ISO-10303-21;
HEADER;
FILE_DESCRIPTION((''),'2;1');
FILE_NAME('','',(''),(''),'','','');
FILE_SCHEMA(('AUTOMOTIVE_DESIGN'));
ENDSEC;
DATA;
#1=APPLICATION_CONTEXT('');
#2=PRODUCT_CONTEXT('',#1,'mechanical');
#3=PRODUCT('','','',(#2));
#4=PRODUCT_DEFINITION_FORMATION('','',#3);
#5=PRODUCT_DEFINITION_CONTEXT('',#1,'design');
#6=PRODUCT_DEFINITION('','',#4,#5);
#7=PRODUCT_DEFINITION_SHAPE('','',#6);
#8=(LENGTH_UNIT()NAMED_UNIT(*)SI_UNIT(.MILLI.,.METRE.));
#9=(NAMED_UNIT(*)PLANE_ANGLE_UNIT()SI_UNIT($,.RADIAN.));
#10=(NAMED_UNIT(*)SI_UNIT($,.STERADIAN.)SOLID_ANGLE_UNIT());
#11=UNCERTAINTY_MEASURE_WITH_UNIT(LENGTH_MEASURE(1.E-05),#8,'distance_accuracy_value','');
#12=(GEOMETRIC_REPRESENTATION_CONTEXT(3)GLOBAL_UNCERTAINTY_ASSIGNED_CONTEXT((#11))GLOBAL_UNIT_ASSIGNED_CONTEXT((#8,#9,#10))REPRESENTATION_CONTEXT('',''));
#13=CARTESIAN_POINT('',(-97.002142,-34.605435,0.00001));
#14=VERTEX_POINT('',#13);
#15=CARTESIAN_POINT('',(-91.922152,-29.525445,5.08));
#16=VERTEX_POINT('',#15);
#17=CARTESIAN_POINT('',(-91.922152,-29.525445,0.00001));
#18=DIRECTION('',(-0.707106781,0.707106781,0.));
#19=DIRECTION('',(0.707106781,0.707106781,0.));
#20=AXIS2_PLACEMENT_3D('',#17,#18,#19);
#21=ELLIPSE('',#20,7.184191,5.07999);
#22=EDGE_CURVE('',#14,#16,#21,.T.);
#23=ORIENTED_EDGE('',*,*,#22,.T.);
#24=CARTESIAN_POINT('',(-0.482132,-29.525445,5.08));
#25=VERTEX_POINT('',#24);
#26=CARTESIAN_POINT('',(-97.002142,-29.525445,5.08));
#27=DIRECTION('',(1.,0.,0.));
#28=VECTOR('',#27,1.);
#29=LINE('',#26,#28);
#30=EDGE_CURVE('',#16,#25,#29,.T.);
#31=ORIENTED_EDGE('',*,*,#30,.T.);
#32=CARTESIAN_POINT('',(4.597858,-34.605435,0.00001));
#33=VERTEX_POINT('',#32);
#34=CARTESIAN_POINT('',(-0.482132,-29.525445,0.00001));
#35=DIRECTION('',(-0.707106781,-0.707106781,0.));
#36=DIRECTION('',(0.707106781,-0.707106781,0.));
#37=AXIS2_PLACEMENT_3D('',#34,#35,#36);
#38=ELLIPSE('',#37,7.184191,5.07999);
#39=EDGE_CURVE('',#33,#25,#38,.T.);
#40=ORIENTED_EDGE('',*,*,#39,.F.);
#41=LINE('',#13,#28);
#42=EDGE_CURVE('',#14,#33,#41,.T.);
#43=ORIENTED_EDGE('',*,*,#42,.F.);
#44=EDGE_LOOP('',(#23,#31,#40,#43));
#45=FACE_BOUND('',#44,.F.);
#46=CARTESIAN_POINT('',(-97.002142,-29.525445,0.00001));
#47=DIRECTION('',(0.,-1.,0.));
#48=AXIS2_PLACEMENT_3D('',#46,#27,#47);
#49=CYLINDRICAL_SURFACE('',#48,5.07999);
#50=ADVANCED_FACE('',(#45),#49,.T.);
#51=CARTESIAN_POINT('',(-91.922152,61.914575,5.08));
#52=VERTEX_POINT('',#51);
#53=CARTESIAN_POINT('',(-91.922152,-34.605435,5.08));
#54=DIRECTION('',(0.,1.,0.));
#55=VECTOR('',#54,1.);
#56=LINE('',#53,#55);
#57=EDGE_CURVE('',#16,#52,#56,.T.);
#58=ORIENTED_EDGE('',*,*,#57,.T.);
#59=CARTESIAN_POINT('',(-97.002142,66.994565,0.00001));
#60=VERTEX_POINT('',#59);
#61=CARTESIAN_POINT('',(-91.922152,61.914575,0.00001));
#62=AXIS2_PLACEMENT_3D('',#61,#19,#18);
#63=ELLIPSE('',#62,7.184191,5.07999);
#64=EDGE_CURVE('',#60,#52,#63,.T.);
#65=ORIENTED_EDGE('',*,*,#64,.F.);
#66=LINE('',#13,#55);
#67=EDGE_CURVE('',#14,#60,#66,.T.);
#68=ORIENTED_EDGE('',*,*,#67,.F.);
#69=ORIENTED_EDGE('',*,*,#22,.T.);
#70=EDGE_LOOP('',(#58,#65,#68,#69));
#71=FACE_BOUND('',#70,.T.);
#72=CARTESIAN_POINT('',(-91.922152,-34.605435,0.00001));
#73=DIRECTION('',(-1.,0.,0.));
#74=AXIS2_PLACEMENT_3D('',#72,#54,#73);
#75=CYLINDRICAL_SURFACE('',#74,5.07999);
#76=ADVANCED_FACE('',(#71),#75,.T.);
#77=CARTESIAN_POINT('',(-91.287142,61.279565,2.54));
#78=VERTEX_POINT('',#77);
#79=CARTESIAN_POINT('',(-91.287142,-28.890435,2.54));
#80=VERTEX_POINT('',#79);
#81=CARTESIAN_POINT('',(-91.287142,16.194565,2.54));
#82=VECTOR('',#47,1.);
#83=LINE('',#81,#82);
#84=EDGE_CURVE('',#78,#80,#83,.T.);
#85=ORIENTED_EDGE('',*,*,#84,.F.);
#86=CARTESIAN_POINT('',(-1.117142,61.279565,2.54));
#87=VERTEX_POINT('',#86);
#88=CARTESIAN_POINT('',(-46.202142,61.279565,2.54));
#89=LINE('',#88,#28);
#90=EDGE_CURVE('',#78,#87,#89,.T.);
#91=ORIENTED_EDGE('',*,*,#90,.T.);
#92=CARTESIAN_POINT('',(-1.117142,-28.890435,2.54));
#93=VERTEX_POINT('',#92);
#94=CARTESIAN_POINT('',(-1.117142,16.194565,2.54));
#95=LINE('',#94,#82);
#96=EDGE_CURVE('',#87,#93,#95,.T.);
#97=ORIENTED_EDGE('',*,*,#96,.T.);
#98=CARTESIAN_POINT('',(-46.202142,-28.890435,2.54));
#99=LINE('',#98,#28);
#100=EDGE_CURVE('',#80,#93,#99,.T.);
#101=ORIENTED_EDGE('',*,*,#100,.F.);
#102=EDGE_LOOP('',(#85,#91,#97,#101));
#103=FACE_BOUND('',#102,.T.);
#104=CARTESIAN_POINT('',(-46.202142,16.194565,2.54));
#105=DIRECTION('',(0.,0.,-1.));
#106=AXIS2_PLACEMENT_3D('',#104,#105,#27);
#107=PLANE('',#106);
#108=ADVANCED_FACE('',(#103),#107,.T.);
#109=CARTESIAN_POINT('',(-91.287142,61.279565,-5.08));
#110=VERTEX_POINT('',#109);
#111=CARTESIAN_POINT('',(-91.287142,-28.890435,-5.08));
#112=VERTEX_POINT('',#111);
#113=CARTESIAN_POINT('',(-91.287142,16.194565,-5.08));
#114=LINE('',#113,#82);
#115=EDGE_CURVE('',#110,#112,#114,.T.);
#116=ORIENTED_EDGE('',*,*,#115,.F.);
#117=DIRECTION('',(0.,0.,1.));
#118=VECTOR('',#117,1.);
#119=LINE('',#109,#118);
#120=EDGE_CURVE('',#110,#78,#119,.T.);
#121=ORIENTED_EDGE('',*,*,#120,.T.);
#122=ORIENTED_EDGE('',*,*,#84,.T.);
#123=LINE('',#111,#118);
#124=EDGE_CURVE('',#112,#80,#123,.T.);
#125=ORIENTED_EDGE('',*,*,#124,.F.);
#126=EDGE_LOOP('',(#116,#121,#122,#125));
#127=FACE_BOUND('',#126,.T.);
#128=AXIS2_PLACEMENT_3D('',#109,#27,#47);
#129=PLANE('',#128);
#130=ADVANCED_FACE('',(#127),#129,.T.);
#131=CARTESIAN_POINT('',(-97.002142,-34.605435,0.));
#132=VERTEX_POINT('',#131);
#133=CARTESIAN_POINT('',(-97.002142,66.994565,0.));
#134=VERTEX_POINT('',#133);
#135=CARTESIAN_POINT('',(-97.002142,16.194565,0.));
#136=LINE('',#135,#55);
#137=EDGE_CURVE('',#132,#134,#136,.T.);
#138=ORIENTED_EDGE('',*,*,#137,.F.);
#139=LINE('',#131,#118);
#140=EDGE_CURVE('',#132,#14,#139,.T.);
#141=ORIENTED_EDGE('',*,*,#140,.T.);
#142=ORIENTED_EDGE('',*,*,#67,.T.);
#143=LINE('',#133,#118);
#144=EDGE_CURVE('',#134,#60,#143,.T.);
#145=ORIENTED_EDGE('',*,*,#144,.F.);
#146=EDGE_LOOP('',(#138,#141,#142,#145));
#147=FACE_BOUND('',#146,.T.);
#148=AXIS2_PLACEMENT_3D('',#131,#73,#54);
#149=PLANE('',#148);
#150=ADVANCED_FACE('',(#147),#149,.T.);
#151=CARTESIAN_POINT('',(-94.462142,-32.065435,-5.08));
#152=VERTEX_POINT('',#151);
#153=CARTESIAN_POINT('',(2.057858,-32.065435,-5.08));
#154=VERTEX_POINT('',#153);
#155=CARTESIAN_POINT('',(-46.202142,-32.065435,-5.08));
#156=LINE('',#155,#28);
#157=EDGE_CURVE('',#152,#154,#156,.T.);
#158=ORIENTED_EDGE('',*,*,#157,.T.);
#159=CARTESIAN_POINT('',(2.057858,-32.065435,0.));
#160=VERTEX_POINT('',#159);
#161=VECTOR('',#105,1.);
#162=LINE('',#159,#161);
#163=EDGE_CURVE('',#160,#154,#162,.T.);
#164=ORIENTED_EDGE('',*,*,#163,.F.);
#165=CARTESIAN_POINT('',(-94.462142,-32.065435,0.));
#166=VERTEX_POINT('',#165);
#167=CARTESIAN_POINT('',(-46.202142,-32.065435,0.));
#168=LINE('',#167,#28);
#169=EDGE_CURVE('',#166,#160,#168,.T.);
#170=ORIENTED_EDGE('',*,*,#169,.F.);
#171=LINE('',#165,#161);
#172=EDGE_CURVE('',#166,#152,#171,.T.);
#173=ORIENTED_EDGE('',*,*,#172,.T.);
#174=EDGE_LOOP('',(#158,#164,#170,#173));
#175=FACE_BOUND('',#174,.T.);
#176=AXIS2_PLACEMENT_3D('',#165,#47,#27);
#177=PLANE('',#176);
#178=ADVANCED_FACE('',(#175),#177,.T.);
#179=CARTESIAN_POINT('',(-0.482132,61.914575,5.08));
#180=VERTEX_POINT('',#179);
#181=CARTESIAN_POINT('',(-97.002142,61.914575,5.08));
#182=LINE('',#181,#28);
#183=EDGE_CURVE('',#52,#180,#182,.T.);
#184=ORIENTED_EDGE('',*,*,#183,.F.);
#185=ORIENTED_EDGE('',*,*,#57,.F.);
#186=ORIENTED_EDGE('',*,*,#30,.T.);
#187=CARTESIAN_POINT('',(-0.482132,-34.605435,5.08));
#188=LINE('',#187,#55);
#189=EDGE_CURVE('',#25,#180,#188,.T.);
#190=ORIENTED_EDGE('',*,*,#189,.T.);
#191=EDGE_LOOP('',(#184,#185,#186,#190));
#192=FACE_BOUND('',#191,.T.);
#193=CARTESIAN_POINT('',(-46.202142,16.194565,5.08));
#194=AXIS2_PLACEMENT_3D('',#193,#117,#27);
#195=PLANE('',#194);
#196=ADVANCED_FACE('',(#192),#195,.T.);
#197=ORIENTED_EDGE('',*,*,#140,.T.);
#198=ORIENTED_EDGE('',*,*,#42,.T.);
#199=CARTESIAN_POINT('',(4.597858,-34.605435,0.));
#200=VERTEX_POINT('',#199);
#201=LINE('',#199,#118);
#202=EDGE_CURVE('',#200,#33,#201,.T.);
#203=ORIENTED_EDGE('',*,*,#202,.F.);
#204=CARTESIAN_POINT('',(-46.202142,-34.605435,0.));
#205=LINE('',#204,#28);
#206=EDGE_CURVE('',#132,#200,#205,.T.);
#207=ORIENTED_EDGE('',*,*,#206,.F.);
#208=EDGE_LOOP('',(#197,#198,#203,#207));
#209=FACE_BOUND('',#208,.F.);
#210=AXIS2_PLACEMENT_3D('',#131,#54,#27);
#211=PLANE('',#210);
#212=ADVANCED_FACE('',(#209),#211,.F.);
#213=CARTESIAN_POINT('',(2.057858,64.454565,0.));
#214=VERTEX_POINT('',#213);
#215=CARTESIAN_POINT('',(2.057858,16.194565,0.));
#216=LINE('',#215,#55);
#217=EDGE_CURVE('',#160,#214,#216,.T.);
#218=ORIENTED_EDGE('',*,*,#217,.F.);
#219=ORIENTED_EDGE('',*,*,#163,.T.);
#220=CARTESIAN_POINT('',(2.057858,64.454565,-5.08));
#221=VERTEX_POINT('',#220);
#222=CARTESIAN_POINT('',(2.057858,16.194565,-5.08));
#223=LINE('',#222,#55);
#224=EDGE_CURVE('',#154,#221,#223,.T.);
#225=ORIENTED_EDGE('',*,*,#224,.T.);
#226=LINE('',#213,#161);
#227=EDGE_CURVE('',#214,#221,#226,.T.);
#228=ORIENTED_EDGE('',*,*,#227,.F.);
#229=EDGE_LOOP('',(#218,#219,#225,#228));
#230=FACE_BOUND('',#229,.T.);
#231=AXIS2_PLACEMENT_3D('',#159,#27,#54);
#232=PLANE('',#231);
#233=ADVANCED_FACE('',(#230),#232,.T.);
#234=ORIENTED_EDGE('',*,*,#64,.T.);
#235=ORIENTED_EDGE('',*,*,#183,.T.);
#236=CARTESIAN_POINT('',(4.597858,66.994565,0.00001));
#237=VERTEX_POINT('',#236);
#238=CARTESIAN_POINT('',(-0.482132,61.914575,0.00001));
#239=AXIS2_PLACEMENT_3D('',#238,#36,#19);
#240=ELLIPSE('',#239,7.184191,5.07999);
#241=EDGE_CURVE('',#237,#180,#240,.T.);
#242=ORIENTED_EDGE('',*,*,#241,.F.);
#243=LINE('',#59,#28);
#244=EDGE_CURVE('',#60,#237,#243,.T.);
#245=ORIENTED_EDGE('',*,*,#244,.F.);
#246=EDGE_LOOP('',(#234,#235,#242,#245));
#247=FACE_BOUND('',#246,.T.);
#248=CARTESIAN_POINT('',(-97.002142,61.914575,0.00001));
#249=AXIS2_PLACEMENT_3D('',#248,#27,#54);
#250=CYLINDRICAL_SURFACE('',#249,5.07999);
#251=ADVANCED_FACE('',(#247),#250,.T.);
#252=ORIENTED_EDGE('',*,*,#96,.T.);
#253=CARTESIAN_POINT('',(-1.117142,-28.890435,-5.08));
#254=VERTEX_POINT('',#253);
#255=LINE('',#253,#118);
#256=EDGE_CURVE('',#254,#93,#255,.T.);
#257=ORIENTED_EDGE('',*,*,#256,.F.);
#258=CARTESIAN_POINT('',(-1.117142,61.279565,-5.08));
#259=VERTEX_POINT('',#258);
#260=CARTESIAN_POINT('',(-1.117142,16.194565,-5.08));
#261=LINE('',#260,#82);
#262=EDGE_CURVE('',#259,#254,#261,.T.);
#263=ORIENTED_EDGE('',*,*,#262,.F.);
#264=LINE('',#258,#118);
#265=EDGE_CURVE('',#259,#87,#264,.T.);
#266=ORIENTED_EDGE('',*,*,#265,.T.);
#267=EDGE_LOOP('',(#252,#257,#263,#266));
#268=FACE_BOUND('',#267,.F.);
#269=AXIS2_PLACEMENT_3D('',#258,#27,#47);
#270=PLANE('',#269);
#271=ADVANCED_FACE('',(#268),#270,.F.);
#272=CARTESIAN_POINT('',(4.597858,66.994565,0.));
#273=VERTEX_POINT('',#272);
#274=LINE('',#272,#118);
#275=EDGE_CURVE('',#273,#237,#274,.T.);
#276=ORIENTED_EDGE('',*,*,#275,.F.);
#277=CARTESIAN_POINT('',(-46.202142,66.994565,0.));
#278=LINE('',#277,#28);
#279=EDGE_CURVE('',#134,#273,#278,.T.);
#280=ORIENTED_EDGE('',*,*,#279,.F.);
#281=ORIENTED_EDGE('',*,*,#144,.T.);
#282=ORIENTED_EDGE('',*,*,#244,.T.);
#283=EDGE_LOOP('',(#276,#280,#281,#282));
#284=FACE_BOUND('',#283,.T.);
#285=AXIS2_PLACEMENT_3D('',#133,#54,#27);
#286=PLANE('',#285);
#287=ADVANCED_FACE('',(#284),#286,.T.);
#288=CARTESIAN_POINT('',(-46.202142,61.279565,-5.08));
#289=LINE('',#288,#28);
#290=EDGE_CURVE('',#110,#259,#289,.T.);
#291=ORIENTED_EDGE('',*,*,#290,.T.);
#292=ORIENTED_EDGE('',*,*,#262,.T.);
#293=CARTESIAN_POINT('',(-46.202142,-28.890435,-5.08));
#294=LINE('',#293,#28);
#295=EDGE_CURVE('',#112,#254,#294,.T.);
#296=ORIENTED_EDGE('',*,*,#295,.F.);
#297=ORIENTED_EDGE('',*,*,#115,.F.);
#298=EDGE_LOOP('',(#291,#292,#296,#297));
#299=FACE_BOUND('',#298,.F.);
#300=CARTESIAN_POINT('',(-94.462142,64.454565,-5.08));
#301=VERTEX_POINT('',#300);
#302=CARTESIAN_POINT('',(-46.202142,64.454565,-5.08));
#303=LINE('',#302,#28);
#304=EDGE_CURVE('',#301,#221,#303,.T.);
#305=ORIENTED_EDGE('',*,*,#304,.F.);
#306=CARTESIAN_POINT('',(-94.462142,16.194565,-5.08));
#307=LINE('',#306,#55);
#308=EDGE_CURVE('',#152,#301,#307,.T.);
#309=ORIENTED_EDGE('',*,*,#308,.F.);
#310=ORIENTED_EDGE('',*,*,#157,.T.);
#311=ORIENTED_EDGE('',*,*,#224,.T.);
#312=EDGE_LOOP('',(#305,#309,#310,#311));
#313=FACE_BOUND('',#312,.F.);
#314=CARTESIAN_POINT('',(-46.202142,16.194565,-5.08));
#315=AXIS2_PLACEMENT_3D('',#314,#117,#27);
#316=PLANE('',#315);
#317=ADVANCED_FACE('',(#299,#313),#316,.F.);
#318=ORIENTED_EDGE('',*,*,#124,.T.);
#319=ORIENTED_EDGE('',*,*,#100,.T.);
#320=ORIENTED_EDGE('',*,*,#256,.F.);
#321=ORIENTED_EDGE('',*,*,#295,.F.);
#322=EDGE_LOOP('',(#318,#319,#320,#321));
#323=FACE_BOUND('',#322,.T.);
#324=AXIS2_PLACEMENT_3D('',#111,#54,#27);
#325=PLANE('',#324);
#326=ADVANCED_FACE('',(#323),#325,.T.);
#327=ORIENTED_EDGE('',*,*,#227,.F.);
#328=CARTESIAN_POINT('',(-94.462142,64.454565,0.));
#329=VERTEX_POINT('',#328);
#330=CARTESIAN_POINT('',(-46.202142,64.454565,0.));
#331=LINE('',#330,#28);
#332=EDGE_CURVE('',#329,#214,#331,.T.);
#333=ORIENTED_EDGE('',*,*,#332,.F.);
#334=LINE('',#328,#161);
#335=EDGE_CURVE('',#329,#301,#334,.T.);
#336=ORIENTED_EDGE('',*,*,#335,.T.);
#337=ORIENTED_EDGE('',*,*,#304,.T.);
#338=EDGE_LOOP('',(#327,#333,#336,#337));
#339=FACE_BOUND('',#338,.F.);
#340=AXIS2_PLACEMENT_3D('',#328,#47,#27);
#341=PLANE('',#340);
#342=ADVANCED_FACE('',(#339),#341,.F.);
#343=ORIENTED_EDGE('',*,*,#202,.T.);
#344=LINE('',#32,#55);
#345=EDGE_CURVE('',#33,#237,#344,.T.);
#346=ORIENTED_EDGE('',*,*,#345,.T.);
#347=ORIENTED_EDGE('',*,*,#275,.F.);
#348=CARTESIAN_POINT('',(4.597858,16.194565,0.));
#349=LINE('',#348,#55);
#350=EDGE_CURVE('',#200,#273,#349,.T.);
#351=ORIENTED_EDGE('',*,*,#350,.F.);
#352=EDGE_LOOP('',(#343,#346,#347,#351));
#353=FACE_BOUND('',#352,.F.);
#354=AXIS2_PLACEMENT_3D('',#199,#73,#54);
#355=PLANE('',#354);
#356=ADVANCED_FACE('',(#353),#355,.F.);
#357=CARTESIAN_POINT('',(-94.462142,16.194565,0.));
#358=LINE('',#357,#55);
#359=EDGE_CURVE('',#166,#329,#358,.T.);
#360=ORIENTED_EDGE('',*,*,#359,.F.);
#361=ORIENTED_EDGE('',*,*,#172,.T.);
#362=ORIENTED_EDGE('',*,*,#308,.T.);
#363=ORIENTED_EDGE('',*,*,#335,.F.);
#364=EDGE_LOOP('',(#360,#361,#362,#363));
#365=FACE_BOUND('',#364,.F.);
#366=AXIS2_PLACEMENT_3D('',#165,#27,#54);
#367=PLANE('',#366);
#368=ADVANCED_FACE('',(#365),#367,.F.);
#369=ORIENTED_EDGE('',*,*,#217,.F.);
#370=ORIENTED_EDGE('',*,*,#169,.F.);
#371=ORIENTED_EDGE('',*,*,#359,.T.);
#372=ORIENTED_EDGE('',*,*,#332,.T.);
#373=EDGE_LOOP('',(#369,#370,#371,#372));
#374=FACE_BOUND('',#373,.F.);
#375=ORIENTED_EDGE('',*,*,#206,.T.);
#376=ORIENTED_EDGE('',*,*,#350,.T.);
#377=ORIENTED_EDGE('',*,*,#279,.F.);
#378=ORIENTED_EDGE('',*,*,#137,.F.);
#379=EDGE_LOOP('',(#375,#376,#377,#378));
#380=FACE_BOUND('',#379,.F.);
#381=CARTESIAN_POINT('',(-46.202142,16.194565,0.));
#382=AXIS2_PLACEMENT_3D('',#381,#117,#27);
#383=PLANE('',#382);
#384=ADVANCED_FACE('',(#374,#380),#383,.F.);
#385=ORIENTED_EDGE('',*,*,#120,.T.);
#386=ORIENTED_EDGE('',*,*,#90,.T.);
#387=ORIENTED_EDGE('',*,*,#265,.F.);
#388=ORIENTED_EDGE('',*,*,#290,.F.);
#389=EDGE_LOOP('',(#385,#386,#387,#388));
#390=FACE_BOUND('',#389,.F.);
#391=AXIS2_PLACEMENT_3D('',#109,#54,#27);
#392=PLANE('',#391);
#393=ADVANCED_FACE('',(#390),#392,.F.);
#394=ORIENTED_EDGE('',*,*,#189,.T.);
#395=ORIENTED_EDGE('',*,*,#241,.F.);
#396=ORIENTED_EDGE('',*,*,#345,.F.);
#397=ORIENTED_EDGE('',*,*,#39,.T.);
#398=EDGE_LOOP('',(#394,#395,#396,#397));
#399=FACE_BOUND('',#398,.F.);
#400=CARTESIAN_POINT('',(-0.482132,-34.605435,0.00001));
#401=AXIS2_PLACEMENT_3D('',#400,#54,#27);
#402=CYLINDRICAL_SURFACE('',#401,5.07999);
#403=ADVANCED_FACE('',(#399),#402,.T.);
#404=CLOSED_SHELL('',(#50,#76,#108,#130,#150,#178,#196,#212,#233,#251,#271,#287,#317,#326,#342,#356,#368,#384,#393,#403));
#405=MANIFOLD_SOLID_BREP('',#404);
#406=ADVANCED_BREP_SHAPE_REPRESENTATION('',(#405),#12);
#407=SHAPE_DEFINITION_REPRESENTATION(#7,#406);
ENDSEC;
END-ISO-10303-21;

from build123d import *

# Parameters (mm, degrees)
F0_W     = 101.6
F0_H     = 101.6
F0_W_2   = 96.52
F0_H_2   = 96.52
F1_DEPTH = 5.08
F2_R     = 5.07999
F3_DEPTH = 5.08
F4_W     = 90.17
F4_H     = 90.17
F5_DEPTH = 7.62


# Not quite as in the source:
# - a fillet or chamfer is up to 0.001 mm smaller than in the source, because OpenCascade refuses the exact size


with BuildPart() as f1:
    # F0 (on Top) → F1 (new body)
    with BuildSketch(Plane.XY):
        with Locations((-46.2021417916, 16.1945652217)):
            Rectangle(F0_W, F0_H)
        with Locations((-46.2021417916, 16.1945652217)):
            Rectangle(F0_W_2, F0_H_2, mode=Mode.SUBTRACT)
        with Locations((-46.2021417916, 16.1945652217)):
            Rectangle(F0_W_2, F0_H_2)
    extrude(amount=F1_DEPTH)

    # F2 (radius 5.08 in the source; OpenCascade refuses exactly that, so slightly less here)
    f2_edges = [f1.edges().sort_by_distance(p)[0] for p in [
        (-97.002142, 16.194565, 5.08),
        (-46.202142, -34.605435, 5.08),
        (4.597858, 16.194565, 5.08),
        (-46.202142, 66.994565, 5.08),
    ]]
    fillet(f2_edges, radius=F2_R)

    # F0 (on Top) → F3 (join)
    with BuildSketch(Plane.XY):
        with Locations((-46.2021417916, 16.1945652217)):
            Rectangle(F0_W_2, F0_H_2)
    extrude(amount=-F3_DEPTH)

    # F4 (on face) → F5 (cut)
    with BuildSketch(Plane(origin=(0, 0, -5.08), x_dir=(1, 0, 0), z_dir=(0, 0, -1))):
        with Locations((-46.2021417916, -16.1945652217)):
            Rectangle(F4_W, F4_H)
    extrude(amount=-F5_DEPTH, mode=Mode.SUBTRACT)


solid = f1.part
